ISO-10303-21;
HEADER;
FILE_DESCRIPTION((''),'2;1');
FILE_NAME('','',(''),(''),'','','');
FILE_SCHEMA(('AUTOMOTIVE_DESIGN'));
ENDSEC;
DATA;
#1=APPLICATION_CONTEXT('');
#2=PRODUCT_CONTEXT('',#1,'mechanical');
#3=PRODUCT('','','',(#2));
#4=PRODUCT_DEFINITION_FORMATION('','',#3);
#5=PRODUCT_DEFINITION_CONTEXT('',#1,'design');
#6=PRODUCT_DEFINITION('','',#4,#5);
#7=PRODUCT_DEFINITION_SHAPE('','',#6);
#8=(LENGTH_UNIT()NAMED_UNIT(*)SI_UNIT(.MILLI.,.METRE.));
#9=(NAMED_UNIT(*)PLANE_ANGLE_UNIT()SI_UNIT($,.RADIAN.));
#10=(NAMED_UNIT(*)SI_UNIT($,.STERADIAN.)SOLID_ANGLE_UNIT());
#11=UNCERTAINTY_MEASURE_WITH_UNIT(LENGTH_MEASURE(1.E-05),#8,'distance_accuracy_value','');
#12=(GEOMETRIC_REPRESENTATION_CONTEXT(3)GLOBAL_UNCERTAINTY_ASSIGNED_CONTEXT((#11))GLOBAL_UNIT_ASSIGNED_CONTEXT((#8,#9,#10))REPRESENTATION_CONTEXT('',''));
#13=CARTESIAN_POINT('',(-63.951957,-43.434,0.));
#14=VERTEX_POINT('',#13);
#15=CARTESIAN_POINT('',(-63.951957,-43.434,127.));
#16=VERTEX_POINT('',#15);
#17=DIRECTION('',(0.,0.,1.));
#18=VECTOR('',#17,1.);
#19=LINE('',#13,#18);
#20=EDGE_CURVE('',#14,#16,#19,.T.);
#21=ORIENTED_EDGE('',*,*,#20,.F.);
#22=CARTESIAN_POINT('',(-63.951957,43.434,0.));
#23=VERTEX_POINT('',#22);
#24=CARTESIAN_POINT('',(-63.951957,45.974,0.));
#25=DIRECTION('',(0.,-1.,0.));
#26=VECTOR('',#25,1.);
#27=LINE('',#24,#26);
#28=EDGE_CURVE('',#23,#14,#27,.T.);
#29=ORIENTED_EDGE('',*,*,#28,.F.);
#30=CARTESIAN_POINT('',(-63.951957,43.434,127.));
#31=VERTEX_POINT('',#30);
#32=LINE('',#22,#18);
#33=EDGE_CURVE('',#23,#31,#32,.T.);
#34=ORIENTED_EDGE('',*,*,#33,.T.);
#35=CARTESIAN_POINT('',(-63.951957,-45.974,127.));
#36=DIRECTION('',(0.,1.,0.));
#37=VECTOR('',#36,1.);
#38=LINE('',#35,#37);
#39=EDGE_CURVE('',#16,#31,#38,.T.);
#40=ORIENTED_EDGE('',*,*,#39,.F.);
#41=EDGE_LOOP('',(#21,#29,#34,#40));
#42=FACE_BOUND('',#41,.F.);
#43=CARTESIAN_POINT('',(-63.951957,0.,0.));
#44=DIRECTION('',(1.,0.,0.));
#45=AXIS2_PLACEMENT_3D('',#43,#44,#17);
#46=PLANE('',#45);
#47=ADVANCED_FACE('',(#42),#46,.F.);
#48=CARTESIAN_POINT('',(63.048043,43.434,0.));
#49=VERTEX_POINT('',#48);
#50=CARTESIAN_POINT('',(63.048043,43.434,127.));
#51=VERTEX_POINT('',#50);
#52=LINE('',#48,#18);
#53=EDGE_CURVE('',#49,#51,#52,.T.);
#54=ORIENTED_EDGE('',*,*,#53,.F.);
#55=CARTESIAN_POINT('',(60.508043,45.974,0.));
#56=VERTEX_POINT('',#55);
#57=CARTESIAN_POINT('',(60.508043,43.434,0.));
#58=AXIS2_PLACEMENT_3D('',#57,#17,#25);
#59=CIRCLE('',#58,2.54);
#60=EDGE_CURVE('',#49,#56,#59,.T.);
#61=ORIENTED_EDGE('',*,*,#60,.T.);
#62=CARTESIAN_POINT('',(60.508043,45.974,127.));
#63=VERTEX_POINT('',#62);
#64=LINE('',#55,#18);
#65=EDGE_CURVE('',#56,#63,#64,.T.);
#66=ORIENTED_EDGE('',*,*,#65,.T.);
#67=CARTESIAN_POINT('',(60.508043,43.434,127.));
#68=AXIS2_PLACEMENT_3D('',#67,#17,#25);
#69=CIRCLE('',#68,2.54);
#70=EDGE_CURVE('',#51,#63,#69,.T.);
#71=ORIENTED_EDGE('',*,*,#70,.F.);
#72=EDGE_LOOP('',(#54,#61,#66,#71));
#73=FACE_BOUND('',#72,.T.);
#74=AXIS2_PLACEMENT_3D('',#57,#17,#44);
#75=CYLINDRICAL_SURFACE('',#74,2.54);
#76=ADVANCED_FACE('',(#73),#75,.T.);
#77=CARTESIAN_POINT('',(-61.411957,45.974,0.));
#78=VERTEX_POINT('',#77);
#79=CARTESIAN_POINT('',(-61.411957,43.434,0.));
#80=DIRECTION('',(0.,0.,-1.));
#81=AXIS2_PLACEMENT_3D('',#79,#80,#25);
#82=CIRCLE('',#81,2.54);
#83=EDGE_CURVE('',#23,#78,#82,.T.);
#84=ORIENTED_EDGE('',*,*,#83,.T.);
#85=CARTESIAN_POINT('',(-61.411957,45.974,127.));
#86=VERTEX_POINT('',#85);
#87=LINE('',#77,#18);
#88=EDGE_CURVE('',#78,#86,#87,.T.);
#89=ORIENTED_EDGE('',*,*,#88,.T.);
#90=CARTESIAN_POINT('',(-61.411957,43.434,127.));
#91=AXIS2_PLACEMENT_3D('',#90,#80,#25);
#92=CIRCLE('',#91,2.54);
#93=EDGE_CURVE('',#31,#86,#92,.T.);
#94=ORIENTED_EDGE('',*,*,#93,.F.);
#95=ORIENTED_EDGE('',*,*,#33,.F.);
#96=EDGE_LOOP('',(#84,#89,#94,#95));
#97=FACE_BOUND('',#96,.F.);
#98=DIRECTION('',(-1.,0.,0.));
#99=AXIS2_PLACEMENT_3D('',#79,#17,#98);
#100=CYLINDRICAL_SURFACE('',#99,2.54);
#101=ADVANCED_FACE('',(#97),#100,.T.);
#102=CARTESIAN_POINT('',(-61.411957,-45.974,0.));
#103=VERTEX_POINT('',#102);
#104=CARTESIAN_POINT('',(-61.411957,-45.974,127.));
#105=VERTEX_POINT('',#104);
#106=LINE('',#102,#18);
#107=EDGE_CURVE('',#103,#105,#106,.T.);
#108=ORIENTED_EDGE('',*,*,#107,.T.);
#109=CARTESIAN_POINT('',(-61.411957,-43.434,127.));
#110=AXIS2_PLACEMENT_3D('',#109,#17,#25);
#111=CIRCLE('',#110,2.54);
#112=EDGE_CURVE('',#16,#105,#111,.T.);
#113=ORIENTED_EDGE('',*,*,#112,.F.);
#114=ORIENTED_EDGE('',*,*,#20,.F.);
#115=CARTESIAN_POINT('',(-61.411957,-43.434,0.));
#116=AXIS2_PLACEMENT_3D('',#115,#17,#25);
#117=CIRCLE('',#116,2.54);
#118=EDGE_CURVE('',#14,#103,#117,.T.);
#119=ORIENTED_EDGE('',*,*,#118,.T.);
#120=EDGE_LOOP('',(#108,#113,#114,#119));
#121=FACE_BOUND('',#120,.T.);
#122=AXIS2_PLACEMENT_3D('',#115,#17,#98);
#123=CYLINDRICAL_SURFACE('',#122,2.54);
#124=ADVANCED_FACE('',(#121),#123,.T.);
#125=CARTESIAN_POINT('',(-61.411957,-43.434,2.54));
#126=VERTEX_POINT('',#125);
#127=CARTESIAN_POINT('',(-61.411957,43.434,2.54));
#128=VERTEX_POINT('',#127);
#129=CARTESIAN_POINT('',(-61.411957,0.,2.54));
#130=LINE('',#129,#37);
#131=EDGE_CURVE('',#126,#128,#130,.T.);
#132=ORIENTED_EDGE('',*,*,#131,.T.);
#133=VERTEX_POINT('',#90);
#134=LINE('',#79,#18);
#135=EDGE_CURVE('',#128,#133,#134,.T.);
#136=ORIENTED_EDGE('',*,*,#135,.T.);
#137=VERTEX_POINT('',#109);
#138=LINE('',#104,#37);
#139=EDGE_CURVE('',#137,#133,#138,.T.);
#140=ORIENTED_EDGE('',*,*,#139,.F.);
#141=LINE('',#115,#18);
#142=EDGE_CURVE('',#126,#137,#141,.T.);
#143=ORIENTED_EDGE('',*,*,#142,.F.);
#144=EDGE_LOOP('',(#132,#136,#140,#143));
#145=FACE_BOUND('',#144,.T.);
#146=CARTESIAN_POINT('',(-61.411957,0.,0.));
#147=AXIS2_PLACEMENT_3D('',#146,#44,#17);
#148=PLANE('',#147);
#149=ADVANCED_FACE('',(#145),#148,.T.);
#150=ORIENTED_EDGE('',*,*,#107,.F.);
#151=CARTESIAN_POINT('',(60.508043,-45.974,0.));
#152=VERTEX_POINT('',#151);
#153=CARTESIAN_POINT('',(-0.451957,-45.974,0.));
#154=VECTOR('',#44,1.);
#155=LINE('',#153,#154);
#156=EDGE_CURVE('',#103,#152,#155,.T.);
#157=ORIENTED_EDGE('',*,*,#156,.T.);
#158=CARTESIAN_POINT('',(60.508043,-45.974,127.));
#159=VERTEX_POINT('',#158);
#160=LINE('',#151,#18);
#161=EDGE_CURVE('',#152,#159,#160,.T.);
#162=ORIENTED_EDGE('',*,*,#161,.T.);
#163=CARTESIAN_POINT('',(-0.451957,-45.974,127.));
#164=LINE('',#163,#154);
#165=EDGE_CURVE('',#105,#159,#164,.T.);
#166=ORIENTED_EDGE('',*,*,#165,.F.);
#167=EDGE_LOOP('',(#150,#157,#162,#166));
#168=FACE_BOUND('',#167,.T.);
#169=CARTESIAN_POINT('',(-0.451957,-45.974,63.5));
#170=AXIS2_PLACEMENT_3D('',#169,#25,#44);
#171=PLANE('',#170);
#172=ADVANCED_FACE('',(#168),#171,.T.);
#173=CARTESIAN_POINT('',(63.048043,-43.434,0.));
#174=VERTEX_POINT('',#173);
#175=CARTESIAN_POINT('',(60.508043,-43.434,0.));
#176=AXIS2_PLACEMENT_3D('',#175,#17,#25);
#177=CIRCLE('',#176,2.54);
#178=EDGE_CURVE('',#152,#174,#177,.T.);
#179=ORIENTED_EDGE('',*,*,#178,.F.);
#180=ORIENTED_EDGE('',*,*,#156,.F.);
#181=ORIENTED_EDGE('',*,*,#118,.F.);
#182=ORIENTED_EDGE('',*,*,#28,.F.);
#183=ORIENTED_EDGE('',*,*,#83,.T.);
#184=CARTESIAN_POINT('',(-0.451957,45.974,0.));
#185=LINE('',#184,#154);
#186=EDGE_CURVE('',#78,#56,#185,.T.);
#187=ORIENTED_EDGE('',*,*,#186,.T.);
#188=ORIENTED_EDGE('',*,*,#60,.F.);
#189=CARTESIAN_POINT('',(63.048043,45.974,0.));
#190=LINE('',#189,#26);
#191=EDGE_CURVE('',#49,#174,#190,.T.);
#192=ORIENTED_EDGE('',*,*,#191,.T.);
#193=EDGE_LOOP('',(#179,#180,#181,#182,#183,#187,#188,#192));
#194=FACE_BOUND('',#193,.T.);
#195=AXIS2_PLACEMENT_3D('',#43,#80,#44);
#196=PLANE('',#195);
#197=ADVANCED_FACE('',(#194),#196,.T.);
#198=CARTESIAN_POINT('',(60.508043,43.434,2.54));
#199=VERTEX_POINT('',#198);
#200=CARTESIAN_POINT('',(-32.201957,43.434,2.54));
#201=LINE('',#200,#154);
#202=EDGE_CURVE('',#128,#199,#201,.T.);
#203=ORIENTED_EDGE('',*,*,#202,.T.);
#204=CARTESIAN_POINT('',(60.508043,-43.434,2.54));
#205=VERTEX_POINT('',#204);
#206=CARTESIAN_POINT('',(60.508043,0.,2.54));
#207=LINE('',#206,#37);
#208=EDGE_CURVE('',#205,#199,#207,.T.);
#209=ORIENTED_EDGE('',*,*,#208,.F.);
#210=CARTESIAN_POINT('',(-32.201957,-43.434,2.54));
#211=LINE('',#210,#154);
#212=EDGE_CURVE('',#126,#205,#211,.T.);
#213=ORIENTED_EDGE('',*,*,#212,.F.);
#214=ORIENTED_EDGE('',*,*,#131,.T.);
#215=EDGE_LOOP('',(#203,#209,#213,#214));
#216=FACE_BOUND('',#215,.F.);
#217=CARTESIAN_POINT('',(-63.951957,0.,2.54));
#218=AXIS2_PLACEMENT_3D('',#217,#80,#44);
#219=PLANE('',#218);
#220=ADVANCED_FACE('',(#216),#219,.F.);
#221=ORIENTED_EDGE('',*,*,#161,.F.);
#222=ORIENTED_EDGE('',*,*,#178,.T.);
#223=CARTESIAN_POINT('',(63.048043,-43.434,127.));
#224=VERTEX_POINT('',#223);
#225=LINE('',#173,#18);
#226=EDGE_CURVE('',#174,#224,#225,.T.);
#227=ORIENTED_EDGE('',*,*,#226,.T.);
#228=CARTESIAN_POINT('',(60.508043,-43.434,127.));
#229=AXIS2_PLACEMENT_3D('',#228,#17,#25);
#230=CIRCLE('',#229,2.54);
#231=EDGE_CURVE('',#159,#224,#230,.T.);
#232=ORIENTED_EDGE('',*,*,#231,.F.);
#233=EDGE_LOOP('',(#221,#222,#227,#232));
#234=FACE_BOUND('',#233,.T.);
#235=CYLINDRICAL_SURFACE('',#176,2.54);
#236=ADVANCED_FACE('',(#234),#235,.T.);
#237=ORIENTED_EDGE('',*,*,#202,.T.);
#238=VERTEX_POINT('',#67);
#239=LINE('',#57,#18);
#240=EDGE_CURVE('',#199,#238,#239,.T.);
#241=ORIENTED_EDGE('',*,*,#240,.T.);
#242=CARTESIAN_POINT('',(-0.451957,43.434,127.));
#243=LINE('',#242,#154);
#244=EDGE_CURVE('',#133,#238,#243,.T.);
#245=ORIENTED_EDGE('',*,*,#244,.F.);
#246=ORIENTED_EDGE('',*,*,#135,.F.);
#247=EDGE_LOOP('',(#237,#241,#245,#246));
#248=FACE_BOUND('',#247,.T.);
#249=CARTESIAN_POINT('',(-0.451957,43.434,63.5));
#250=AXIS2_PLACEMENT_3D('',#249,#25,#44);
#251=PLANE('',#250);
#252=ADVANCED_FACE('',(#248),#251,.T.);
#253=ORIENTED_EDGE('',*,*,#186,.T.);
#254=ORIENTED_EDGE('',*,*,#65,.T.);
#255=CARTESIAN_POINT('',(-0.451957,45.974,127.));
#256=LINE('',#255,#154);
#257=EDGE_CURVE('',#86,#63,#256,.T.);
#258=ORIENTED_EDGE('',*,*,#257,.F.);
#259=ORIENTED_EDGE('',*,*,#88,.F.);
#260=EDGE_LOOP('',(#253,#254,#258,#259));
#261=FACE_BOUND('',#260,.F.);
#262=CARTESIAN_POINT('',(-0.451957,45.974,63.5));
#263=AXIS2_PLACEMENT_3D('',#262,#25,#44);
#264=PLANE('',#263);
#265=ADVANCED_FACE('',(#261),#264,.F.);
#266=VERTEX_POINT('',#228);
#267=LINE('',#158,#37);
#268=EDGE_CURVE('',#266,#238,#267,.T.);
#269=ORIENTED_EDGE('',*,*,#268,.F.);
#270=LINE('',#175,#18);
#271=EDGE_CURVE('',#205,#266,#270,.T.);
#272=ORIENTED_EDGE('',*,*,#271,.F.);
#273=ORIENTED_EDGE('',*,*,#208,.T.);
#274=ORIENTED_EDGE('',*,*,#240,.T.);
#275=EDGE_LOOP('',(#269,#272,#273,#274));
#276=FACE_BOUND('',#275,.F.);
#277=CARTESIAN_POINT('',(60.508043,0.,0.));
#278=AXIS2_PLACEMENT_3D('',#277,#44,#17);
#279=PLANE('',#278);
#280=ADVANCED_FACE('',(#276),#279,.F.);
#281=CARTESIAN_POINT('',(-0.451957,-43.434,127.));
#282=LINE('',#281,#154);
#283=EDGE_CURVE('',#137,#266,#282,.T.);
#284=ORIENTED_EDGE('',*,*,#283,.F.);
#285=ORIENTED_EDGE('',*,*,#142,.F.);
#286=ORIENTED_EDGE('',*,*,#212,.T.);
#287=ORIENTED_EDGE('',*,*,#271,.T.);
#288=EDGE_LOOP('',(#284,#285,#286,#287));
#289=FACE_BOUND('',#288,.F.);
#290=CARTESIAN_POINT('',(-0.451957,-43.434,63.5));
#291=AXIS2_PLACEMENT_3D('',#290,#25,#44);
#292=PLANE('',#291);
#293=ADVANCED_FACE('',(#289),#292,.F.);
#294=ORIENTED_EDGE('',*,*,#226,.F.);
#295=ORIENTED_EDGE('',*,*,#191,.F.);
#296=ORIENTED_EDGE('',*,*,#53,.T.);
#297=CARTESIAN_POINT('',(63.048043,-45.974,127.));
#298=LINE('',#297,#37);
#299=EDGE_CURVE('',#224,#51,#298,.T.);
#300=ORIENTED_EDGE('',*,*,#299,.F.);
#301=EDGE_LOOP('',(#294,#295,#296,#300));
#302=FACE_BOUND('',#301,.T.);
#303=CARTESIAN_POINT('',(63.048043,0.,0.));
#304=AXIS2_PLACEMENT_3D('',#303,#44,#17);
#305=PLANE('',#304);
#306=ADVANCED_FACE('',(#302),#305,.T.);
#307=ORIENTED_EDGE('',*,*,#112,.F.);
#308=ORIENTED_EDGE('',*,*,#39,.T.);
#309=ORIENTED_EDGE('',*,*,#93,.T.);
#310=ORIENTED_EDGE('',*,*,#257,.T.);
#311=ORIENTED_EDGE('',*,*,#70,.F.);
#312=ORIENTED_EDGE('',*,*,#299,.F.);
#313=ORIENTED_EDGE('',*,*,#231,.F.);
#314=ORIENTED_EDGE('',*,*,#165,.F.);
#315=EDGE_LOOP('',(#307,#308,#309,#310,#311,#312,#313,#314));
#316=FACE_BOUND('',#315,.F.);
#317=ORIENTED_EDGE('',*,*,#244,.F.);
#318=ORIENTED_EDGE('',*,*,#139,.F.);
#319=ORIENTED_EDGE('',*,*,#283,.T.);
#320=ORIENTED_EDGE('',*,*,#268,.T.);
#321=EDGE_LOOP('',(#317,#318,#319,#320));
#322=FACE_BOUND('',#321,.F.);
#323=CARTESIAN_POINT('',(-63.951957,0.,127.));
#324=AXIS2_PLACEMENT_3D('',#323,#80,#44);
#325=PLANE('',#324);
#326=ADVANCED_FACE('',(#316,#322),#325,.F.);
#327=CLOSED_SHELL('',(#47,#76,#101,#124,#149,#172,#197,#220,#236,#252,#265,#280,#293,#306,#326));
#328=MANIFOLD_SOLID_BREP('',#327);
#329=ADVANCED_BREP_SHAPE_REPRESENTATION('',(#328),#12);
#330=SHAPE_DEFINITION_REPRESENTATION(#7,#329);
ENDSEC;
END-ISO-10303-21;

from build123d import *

# Parameters (mm, degrees)
F0_W     = 127
F0_H     = 127
F1_DEPTH = 45.974
F2_R     = 2.54
F3_T     = 2.54


# Not quite as in the source:
# - a shell that OpenCascade refuses in one call is made with other operations: the cavity is built on its own and cut out


with BuildPart() as f1:
    # F0 (on Front) → F1 (new body, symmetric)
    with BuildSketch(Plane.XZ):
        with Locations((-0.4519568912, 63.5)):
            Rectangle(F0_W, F0_H)
    extrude(amount=F1_DEPTH, both=True)

    # F2
    f2_edges = [f1.edges().sort_by_distance(p)[0] for p in [
        (-63.951957, -45.974, 63.5),
        (63.048043, -45.974, 63.5),
        (63.048043, 45.974, 63.5),
        (-63.951957, 45.974, 63.5),
    ]]
    fillet(f2_edges, radius=F2_R)

    # F3: shell of thickness 2.54, made by hand


with BuildPart() as f3_core1:
    # F3_t2: copy of F1
    add(f1.part)

    # the walls: a layer under each face that stays
    f3_faces = [f3_core1.faces().sort_by_distance(p)[0] for p in [
        (-0.4519568912, 45.974, 63.5),
        (63.0480431088, 0, 63.5),
        (-63.9519568912, 0, 63.5),
        (-0.4519568912, -45.974, 63.5),
        (-0.4519568912, 0, 0),
    ]]
    thicken(f3_faces, amount=-F3_T, mode=Mode.SUBTRACT)


with BuildPart() as f1_1:
    add(f1.part)

    # what is left inside the walls is the cavity
    f3_cavity = [f3_core1.part.solids().sort_by_distance(p)[0] for p in [
        (-0.451957, -43.4086, 44.026667),
    ]]
    add(f3_cavity, mode=Mode.SUBTRACT)


solid = f1_1.part
